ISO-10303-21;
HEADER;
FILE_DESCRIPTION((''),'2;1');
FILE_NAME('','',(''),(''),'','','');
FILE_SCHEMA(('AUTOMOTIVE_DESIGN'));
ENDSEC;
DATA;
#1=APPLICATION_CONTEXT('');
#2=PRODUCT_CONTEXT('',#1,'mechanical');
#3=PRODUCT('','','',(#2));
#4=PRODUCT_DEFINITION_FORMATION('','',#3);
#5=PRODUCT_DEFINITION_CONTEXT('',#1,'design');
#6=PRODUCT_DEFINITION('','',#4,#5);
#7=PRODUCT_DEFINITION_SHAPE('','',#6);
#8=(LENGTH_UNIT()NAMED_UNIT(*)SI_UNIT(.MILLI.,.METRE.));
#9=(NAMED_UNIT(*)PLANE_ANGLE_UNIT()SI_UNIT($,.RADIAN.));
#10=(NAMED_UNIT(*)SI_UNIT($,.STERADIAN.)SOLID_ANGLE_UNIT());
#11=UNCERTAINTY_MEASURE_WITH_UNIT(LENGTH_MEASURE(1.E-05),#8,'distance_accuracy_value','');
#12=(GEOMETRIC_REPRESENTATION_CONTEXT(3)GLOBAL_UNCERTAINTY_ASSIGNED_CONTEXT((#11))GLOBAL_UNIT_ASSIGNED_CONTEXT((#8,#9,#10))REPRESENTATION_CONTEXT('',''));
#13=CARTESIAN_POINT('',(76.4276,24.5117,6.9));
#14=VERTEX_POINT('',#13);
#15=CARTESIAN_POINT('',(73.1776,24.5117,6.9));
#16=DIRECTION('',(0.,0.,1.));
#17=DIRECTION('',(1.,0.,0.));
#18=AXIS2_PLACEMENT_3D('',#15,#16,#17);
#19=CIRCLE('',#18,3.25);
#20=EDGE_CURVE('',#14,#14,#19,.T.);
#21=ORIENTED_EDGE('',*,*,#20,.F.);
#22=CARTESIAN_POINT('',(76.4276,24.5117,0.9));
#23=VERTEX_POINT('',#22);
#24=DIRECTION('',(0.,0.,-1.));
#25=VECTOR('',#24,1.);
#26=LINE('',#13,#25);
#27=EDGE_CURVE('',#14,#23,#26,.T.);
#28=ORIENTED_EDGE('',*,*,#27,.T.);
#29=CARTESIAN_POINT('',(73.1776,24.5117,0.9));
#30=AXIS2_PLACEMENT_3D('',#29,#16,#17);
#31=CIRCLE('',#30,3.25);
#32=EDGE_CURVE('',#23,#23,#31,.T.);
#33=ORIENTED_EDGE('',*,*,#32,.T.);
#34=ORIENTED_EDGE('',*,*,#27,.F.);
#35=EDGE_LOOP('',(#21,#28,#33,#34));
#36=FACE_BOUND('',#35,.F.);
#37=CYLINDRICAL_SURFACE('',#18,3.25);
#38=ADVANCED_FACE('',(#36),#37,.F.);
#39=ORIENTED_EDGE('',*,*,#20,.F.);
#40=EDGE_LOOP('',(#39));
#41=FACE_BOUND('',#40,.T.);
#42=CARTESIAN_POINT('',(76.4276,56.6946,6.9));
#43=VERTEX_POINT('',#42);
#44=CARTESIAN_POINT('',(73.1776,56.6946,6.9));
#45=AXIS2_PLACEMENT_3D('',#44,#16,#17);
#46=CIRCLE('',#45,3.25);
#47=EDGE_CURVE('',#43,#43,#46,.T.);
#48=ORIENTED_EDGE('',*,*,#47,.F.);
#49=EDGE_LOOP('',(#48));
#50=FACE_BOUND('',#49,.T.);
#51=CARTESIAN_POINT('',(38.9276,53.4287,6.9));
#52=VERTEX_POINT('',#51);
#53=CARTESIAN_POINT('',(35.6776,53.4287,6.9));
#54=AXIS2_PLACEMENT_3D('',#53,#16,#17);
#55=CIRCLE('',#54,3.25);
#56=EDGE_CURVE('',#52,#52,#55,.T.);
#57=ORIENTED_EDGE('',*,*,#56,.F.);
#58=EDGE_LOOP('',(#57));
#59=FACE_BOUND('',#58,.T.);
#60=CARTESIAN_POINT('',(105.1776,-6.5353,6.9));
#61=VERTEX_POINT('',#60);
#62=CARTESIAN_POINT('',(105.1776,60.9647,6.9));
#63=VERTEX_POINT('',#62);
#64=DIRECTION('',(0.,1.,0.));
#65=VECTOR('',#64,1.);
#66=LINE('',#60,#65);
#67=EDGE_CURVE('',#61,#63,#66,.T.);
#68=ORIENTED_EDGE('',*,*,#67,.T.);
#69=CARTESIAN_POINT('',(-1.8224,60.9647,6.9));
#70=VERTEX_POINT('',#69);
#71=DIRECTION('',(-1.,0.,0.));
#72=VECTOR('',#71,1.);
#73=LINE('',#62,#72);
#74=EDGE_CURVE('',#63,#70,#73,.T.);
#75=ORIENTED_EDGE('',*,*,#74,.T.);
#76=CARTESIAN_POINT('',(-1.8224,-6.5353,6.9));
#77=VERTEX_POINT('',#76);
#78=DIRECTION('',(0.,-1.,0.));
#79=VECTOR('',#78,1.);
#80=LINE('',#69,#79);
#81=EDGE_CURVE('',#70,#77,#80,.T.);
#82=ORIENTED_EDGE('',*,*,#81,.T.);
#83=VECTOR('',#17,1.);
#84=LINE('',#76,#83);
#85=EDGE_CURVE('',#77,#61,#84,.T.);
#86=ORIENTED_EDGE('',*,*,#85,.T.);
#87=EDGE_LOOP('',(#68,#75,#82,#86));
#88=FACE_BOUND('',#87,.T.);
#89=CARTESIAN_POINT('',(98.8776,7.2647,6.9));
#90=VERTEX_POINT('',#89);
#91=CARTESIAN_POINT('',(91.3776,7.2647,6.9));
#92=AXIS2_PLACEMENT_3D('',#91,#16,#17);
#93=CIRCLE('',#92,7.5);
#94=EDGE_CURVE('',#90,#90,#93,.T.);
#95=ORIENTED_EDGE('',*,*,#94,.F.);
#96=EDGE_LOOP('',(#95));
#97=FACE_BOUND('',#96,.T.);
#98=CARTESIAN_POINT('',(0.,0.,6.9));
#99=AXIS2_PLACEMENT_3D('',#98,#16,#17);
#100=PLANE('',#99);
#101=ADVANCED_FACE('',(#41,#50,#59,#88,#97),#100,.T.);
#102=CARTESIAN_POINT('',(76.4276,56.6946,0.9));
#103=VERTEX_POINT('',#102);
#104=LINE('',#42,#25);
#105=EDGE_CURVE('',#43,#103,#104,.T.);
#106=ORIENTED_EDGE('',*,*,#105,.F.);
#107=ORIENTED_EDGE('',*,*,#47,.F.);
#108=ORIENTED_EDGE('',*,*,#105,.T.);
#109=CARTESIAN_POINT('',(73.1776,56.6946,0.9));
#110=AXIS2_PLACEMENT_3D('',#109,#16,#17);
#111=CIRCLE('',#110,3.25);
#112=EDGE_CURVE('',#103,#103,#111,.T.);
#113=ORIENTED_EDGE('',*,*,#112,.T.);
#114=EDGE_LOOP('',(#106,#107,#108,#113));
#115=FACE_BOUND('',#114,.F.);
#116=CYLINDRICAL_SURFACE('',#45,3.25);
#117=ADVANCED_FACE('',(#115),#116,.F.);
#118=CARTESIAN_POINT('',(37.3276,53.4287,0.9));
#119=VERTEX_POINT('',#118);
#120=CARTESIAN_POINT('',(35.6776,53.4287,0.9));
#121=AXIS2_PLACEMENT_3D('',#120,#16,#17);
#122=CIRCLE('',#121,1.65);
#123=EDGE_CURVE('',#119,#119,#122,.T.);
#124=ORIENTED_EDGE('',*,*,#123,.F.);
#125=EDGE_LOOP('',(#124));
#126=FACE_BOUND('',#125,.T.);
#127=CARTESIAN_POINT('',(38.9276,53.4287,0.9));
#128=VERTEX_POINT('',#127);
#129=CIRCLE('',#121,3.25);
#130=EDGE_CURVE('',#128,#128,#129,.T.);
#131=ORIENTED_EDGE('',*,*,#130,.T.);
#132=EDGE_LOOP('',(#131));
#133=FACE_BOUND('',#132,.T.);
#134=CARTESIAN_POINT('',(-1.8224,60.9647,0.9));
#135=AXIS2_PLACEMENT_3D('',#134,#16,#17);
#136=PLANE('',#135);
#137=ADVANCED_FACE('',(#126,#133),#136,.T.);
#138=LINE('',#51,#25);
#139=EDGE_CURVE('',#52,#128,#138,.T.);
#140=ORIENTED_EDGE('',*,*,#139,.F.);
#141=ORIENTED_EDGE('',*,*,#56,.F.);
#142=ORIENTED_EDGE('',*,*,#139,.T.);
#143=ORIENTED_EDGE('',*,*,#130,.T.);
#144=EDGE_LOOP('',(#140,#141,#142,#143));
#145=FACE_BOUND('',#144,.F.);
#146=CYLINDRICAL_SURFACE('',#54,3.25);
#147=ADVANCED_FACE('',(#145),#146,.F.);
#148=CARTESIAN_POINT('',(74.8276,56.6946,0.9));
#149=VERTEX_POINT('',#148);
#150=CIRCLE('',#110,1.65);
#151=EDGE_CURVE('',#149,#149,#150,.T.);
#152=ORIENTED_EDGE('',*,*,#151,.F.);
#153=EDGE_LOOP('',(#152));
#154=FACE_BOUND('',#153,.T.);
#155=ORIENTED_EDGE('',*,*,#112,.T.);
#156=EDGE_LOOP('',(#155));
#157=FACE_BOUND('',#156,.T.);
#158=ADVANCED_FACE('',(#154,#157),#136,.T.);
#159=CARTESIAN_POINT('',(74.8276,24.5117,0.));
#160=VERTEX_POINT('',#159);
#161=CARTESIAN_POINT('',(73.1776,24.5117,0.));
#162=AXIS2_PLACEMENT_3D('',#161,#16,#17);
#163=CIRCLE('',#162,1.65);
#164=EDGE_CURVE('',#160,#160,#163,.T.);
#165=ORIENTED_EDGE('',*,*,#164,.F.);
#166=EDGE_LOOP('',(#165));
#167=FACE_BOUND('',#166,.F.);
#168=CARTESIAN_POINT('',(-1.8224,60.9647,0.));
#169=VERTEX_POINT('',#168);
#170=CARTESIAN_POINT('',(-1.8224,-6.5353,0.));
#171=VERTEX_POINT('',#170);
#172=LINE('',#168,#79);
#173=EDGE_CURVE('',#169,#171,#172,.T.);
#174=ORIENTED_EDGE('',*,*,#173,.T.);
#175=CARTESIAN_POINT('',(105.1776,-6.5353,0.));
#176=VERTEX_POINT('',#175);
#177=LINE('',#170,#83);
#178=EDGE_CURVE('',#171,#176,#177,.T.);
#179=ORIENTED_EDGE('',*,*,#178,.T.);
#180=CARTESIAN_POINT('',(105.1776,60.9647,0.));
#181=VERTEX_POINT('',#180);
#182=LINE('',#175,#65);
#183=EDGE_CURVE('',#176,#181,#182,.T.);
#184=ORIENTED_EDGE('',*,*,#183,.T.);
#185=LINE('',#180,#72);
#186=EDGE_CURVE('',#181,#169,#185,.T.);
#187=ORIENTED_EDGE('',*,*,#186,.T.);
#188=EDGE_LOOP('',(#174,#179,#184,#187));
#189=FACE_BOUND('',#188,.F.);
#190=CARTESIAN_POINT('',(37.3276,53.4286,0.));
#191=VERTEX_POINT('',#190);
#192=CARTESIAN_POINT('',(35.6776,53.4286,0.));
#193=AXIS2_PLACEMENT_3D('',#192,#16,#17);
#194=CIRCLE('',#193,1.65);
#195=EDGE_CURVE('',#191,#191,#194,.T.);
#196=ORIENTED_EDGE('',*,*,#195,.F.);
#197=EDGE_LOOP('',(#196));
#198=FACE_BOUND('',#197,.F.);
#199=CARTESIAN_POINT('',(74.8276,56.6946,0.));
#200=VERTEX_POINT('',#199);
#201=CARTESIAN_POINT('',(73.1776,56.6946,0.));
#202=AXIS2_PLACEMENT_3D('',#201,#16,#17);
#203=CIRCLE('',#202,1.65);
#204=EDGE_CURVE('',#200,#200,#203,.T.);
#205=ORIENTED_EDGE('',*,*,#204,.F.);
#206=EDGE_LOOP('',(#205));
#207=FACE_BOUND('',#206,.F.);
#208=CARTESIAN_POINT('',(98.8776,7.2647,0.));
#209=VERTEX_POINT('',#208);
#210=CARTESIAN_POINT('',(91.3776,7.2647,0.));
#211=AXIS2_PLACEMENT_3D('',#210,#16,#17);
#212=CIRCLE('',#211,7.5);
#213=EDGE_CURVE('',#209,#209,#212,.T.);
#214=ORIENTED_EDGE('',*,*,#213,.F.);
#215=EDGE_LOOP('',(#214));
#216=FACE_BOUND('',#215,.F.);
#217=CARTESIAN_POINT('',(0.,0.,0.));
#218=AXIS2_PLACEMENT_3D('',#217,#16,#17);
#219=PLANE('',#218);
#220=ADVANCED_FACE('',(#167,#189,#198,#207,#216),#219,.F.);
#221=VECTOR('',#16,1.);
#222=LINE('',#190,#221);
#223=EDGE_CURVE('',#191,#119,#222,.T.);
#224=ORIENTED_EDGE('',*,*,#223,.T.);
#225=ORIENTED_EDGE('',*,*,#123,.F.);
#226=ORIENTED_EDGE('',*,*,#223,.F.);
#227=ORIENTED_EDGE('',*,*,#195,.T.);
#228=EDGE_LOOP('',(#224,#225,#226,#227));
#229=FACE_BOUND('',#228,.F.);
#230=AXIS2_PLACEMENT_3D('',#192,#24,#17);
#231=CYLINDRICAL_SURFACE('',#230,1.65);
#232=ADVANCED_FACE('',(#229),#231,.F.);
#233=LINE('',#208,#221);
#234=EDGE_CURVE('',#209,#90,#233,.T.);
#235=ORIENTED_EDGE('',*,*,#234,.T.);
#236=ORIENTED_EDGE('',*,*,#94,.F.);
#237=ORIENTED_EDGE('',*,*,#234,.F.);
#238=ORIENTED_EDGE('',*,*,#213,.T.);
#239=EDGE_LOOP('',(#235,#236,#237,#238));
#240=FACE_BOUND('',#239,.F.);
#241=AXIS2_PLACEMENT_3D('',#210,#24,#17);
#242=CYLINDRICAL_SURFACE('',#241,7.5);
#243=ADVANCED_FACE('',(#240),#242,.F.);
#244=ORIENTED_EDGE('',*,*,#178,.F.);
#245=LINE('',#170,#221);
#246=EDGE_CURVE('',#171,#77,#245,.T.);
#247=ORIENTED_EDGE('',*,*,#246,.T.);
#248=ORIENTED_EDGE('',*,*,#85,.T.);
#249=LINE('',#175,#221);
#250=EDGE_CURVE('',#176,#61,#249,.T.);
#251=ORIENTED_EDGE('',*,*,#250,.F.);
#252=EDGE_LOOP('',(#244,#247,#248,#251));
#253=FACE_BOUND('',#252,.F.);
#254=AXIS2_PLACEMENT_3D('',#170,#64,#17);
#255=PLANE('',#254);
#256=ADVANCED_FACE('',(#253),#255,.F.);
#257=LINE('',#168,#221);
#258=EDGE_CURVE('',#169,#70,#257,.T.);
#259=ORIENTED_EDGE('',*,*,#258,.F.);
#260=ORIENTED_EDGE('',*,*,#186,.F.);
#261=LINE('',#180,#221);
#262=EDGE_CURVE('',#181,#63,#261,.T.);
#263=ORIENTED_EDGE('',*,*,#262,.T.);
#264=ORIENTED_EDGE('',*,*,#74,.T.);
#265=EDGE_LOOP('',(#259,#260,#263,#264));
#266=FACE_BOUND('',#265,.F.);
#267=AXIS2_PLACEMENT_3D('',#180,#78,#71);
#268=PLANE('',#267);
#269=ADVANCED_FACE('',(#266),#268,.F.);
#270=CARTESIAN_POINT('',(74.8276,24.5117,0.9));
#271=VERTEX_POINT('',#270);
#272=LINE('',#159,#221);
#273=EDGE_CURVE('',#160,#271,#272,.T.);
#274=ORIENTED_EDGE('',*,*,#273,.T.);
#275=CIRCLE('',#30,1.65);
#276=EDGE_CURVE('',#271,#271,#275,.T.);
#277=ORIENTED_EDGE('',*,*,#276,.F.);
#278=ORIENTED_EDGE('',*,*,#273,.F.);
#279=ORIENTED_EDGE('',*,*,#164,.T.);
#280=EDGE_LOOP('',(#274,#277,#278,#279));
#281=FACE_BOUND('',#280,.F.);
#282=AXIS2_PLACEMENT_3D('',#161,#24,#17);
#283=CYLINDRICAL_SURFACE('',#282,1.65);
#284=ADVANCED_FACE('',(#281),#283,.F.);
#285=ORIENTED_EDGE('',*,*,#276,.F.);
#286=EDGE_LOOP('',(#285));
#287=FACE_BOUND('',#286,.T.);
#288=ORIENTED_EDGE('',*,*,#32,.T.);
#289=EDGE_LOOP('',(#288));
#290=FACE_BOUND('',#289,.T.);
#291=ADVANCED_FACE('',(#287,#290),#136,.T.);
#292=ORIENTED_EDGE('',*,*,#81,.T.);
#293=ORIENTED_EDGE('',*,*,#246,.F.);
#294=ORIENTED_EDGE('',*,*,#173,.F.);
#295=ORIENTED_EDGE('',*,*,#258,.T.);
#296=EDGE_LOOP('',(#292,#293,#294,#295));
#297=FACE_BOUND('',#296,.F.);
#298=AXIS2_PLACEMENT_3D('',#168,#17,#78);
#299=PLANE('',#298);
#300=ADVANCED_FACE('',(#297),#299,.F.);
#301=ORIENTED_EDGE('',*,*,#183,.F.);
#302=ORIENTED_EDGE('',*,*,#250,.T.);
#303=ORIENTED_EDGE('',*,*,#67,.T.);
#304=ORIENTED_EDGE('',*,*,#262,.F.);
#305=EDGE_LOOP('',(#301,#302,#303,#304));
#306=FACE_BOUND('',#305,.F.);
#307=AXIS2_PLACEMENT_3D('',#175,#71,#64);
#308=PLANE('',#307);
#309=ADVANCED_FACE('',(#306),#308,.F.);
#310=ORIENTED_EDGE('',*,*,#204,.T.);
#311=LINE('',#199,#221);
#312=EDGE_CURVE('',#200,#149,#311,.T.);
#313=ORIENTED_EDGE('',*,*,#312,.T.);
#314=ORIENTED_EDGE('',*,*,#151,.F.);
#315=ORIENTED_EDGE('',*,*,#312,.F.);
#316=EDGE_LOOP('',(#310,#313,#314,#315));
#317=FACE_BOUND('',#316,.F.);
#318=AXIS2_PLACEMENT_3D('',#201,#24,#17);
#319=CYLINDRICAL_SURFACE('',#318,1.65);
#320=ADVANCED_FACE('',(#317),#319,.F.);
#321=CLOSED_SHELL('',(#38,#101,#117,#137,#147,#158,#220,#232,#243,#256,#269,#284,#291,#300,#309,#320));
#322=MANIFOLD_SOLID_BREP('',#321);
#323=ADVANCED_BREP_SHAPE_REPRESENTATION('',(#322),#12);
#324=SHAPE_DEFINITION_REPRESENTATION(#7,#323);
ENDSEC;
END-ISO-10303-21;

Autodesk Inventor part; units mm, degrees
ref_plane "YZ Plane" through (0, 0, 0) normal (1, 0, 0) x (0, 1, 0)
ref_plane "XZ Plane" through (0, 0, 0) normal (0, 1, 0) x (-1, 0, 0)
ref_plane "Work Plane1" through (0, 0, 0) normal (0, 0, 1) x (1, 0, 0)
sketch "Sketch1" plane through (0, 0, 0) normal (0, 0, 1) x (1, 0, 0)
  circle A0 centre (35.6776, 53.4286) radius 1.65 construction
  circle A1 centre (91.3776, 7.2647) radius 7.5 construction
  circle A2 centre (73.1776, 24.5117) radius 1.65 construction
  circle A3 centre (73.1776, 56.6946) radius 1.65 construction
  circle A4 centre (75.9087, -63.7578) radius 1.65 construction
  circle A5 centre (1.8224, -63.7578) radius 1.65 construction
  line L0 (105.1776, 60.9647) -> (-1.8224, 60.9647) construction
  line L1 (-1.8224, 60.9647) -> (-1.8224, -66.5509) construction
  line L2 (-1.8224, -66.5509) -> (78.1776, -66.5509) construction
  line L3 (78.1776, -66.5509) -> (78.1776, -30.5509) construction
  line L4 (78.1776, -30.5509) -> (105.1776, -30.5509) construction
  line L5 (105.1776, -30.5509) -> (105.1776, 60.9647) construction
  line L6 (105.1776, 60.9647) -> (-1.8224, 60.9647)
  line L7 (-1.8224, 60.9647) -> (-1.8224, -6.5353)
  line L8 (-1.8224, -6.5353) -> (105.1776, -6.5353)
  line L9 (105.1776, -6.5353) -> (105.1776, 60.9647)
  circle A6 centre (91.3776, 7.2647) radius 7.5
  circle A7 centre (73.1776, 56.6946) radius 1.65 projected
  circle A8 centre (73.1776, 24.5117) radius 1.65 projected
  circle A9 centre (35.6776, 53.4286) radius 1.65 projected
  point P0 (0, 0)
  dimension "d0" = 13.8
ref_plane "Work Plane2" through (-44.4224, -5.9353, 6.9) normal (0, 0, -1) x (0, 1, 0)
extrude "Extrusion1" add sketch "Sketch1" along normal up to surface (6.9 mm away)
sketch "Sketch2" plane through (-1.8224, 60.9647, 6.9) normal (0, 0, 1) x (1, 0, 0)
  circle A0 centre (37.5, -7.536) radius 1.65 projected
  circle A1 centre (75, -4.2701) radius 1.65 projected
  circle A2 centre (75, -36.453) radius 1.65 projected
  circle A3 centre (75, -4.2701) radius 3.25
  circle A4 centre (37.5, -7.536) radius 3.25
  circle A5 centre (75, -36.453) radius 3.25
  point P0 (1.8224, -60.9647)
  dimension "d3" = 6.5
  dimension "d4" = 6.5
  dimension "d5" = 6.5
extrude "Extrusion2" cut sketch "Sketch2" against normal blind 6
properties part number "10_MiniSPIM_Smarthponebase"
